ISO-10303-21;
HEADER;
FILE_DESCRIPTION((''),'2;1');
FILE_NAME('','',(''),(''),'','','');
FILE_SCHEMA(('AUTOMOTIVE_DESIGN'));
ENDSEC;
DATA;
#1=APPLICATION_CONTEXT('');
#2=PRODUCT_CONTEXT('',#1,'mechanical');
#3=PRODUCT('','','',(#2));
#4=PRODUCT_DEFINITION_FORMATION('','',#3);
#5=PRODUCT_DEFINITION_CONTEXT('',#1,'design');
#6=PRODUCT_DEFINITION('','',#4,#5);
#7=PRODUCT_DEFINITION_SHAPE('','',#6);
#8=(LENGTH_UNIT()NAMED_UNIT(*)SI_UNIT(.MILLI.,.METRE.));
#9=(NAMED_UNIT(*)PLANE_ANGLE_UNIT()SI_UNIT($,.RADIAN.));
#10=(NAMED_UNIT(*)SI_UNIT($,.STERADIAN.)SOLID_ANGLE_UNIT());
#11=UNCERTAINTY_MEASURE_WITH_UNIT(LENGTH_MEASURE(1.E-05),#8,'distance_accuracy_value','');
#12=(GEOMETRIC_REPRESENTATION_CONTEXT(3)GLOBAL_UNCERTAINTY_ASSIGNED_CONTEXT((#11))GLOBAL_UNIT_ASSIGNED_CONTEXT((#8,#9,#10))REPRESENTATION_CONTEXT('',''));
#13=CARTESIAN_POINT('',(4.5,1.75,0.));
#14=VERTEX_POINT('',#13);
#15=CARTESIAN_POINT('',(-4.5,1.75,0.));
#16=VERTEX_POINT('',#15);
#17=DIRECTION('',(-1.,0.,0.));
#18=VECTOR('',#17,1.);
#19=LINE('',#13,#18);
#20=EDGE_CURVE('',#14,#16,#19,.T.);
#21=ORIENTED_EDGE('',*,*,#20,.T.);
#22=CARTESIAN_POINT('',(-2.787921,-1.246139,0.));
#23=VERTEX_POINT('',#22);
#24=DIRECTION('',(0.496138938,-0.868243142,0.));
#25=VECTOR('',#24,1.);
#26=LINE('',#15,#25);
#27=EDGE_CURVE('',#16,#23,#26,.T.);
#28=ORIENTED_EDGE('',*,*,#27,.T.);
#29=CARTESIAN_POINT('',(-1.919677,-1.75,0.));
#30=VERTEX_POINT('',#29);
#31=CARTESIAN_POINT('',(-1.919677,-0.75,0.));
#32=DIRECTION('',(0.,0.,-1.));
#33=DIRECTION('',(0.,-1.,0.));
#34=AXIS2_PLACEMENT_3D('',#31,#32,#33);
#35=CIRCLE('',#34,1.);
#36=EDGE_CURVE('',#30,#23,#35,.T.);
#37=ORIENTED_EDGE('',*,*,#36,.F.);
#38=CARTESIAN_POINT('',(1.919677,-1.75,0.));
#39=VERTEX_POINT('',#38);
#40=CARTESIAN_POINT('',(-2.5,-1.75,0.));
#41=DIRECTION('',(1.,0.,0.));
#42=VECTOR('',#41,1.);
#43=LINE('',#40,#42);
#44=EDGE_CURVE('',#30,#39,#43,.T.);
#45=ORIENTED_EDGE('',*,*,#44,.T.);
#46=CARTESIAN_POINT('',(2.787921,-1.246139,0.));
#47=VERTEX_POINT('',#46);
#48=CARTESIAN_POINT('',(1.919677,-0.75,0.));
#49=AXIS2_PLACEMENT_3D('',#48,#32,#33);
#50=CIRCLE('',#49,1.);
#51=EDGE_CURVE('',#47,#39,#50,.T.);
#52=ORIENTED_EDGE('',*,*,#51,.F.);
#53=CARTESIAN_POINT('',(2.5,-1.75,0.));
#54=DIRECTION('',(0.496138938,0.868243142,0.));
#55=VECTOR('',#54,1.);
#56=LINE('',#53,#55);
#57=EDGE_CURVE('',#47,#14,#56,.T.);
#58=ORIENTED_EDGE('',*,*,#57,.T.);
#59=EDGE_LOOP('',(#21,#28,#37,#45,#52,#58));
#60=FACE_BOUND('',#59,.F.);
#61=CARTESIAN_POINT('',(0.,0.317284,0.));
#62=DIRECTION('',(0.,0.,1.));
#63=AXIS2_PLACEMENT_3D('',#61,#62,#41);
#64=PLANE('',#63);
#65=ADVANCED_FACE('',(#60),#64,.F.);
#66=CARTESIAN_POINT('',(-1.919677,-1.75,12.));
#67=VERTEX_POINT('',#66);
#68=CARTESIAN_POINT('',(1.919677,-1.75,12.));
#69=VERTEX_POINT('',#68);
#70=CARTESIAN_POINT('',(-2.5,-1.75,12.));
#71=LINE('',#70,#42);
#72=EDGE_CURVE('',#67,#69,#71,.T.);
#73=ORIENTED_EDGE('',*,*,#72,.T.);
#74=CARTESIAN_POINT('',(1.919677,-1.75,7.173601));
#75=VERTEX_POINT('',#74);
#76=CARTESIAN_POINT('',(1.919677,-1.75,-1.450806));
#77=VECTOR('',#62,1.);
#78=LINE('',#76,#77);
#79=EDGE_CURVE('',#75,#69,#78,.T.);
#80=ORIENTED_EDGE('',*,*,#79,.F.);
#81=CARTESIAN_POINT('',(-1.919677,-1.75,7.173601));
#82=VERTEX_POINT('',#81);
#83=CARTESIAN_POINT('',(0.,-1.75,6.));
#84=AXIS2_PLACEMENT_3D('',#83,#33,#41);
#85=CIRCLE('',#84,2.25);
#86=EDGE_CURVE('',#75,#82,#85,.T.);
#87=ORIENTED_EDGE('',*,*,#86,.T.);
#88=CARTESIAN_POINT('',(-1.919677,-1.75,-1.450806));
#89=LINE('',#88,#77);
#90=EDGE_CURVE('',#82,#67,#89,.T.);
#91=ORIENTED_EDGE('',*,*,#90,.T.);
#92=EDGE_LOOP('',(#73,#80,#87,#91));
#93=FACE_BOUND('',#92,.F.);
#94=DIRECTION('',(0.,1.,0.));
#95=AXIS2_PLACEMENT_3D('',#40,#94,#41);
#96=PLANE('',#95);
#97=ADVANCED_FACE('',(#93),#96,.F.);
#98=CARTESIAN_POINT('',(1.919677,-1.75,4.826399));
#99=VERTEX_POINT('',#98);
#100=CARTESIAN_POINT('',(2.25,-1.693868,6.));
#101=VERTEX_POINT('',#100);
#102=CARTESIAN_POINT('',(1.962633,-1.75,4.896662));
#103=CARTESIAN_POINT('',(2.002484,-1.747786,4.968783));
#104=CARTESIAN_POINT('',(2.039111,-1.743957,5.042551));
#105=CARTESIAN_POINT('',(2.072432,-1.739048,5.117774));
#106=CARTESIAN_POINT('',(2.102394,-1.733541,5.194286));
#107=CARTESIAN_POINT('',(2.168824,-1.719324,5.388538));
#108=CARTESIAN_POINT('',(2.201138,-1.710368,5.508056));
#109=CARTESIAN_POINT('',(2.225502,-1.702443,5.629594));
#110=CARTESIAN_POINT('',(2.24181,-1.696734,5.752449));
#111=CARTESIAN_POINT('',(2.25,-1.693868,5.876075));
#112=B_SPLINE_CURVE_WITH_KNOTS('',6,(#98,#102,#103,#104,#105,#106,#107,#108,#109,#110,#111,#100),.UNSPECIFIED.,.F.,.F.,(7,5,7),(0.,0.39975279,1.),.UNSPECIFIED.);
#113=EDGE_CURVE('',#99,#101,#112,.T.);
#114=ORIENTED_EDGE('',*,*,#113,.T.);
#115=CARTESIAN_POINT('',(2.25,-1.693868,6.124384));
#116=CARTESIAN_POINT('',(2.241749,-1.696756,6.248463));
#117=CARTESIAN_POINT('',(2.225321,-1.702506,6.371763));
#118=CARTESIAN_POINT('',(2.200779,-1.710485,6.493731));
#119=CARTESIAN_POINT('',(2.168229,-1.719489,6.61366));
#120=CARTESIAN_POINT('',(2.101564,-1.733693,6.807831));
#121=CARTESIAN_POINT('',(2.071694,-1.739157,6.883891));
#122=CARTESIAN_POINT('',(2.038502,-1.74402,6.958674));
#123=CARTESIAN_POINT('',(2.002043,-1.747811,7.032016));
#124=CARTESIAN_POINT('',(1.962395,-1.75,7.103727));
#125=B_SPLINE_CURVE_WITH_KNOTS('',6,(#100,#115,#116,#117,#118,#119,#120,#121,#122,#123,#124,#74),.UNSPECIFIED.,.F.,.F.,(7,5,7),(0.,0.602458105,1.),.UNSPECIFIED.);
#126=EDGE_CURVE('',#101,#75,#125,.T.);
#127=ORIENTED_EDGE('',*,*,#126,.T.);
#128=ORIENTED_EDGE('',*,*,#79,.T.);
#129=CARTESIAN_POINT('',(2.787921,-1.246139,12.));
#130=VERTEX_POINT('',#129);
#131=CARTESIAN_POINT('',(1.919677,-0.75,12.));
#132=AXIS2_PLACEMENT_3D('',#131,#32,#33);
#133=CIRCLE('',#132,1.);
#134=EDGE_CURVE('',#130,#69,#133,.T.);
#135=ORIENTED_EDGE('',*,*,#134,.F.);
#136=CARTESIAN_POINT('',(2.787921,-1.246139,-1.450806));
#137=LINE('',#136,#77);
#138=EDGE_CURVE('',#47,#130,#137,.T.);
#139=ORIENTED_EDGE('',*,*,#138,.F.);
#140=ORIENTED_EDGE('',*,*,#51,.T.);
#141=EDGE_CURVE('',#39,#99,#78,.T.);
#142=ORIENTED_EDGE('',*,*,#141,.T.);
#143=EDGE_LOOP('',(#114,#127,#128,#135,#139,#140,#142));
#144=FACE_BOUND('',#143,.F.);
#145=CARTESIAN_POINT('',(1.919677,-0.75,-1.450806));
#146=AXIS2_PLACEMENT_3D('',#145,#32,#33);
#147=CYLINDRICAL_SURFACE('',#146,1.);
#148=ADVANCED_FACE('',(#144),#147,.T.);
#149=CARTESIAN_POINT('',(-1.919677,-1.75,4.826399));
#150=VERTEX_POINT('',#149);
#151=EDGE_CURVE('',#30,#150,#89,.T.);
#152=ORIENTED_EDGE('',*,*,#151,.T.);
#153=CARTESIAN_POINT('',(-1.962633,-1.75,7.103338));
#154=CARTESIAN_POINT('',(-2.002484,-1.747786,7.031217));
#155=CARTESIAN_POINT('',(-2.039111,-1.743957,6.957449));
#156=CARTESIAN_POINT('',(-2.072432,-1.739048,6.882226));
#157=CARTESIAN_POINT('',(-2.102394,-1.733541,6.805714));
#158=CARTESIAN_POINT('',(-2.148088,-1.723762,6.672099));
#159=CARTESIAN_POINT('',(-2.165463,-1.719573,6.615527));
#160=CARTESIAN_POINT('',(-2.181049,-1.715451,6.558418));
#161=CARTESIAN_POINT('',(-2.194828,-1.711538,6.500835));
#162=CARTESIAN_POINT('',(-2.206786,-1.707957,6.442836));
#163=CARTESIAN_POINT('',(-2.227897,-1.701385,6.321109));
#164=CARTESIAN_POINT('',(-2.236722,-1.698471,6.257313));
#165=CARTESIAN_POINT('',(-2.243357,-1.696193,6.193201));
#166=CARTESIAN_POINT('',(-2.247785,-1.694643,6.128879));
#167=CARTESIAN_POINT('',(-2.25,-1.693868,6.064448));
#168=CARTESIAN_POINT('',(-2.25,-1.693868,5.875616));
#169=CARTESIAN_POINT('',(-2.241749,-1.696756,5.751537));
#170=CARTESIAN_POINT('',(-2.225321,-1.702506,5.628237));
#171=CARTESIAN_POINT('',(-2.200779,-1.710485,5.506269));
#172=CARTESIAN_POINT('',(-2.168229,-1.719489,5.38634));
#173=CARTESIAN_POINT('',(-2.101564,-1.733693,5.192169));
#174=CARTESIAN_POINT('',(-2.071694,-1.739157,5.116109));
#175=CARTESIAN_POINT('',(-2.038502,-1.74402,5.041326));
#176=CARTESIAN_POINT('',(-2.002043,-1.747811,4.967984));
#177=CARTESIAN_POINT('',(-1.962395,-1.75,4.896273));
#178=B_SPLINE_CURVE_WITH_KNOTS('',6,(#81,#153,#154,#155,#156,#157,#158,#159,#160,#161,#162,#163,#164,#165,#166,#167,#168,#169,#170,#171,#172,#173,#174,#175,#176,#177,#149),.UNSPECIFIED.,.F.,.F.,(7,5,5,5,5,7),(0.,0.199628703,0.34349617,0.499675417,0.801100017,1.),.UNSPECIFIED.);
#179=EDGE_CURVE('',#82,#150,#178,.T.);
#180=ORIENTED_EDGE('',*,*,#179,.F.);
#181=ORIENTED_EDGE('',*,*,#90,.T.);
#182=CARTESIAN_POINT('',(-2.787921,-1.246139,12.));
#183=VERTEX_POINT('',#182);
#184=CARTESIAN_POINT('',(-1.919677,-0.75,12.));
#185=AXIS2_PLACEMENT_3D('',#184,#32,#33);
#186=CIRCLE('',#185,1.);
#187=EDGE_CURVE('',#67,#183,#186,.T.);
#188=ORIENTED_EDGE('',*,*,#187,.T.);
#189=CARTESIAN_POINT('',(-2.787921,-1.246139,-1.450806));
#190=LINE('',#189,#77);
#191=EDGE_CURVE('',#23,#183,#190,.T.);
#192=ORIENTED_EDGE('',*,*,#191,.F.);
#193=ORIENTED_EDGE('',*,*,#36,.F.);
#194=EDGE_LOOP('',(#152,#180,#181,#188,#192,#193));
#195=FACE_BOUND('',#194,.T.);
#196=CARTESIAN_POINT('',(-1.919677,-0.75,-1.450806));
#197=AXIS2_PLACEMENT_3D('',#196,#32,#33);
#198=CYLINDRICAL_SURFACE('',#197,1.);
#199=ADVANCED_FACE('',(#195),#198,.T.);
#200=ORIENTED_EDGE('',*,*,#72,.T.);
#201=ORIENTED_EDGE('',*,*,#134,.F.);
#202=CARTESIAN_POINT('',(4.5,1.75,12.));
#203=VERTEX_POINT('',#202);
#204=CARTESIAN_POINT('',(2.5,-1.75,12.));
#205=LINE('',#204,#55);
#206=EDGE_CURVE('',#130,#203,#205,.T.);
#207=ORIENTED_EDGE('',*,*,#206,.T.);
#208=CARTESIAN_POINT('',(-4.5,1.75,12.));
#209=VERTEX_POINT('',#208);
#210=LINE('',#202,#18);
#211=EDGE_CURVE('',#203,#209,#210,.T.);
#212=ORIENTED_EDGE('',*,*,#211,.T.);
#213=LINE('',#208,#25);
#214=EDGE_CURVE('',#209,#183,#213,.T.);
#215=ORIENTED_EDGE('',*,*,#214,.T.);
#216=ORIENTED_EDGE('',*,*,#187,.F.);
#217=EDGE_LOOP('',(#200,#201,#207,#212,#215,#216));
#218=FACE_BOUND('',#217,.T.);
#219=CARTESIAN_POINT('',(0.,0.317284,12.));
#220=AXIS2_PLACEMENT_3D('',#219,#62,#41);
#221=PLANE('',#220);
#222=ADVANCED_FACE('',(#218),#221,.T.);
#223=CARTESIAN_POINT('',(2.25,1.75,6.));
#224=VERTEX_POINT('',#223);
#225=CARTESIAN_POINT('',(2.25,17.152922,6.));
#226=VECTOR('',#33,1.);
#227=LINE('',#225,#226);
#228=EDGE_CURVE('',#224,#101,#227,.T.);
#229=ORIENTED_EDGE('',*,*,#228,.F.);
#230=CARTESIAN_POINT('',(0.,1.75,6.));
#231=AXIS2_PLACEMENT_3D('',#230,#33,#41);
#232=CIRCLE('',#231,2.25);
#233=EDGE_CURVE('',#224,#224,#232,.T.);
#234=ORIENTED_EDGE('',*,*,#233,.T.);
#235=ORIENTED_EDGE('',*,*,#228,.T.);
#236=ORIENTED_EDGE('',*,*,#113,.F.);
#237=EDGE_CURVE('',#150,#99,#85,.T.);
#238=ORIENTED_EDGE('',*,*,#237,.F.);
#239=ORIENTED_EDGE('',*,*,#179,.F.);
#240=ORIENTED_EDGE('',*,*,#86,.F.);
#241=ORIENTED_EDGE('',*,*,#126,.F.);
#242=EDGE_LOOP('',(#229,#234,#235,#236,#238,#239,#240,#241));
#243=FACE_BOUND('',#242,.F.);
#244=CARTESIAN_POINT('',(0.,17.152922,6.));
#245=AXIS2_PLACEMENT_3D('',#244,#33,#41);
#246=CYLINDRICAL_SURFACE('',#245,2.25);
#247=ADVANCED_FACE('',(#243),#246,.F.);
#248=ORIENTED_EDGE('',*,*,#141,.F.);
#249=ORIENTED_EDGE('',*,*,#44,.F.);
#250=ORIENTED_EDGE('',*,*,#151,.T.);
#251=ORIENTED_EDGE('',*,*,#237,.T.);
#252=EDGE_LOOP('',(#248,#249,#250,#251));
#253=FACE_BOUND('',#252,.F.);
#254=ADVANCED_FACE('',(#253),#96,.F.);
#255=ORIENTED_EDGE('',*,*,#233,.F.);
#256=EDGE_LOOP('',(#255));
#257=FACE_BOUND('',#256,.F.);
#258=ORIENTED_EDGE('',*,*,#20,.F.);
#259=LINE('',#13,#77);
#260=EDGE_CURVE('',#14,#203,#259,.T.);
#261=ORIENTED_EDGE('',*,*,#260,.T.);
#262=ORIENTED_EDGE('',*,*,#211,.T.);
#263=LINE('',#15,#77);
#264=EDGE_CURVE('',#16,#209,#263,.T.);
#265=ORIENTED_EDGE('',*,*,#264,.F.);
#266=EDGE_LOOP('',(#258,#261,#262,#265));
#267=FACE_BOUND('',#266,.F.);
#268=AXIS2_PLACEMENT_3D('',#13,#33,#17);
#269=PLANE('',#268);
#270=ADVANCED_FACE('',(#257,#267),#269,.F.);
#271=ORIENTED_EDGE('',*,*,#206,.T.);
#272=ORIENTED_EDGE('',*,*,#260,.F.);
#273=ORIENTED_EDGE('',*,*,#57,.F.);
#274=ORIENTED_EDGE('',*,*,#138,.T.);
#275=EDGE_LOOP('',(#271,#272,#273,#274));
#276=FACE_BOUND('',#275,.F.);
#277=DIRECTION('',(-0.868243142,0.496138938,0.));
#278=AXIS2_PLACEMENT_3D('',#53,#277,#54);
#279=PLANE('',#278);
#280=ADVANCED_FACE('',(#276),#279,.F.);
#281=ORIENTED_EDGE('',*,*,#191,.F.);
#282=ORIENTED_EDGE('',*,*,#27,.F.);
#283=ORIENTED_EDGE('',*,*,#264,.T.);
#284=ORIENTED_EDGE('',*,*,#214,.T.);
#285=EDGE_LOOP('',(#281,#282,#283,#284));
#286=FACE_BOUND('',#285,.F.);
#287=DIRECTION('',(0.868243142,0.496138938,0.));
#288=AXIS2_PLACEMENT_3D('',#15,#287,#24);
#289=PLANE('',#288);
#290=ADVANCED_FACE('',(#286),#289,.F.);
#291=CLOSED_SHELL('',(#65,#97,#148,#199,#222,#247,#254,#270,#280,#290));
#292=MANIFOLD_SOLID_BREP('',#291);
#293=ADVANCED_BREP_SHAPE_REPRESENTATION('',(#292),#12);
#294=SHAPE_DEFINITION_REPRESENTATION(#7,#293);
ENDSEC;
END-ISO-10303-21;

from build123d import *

# Parameters (mm, degrees)
F1_DEPTH    = 12
F3_D        = 4.5
F4_T1_DEPTH = 14.9016126774


# Not quite as in the source:
# - a fillet or chamfer that OpenCascade refuses, or shapes differently, is made with other operations: its cross-section is extruded or revolved along the edge and cut away or added


with BuildPart() as f1:
    # F0 (on Top) → F1 (new body)
    with BuildSketch(Plane.XY):
        Polygon((-2.5, -1.75), (2.5, -1.75), (4.5, 1.75), (-4.5, 1.75), align=None)
    extrude(amount=F1_DEPTH)

    # F3 (through all)
    with Locations(Plane(origin=(0, 1.75, 0), x_dir=(-1, 0, 0), z_dir=(0, 1, 0))):
        with Locations((0, 6)):
            Hole(F3_D / 2)

    # F4: fillet of radius 1 on 2 edges, made by hand

    # F4_s2 → F4_t1 (cut)
    with BuildSketch(Plane.XY.offset(-1.4508063387)):
        with BuildLine():
            ThreePointArc((1.9196774645, -1.75), (2.4216042827, -1.6149100931), (2.7879206067, -1.2461389384))
            Line((2.7879206067, -1.2461389384), (2.5, -1.75))
            Line((2.5, -1.75), (1.9196774645, -1.75))
        make_face()
        with BuildLine():
            ThreePointArc((-1.9196774645, -1.75), (-2.4216042827, -1.6149100931), (-2.7879206067, -1.2461389384))
            Line((-2.7879206067, -1.2461389384), (-2.5, -1.75))
            Line((-2.5, -1.75), (-1.9196774645, -1.75))
        make_face()
    extrude(amount=F4_T1_DEPTH, mode=Mode.SUBTRACT)


solid = f1.part
